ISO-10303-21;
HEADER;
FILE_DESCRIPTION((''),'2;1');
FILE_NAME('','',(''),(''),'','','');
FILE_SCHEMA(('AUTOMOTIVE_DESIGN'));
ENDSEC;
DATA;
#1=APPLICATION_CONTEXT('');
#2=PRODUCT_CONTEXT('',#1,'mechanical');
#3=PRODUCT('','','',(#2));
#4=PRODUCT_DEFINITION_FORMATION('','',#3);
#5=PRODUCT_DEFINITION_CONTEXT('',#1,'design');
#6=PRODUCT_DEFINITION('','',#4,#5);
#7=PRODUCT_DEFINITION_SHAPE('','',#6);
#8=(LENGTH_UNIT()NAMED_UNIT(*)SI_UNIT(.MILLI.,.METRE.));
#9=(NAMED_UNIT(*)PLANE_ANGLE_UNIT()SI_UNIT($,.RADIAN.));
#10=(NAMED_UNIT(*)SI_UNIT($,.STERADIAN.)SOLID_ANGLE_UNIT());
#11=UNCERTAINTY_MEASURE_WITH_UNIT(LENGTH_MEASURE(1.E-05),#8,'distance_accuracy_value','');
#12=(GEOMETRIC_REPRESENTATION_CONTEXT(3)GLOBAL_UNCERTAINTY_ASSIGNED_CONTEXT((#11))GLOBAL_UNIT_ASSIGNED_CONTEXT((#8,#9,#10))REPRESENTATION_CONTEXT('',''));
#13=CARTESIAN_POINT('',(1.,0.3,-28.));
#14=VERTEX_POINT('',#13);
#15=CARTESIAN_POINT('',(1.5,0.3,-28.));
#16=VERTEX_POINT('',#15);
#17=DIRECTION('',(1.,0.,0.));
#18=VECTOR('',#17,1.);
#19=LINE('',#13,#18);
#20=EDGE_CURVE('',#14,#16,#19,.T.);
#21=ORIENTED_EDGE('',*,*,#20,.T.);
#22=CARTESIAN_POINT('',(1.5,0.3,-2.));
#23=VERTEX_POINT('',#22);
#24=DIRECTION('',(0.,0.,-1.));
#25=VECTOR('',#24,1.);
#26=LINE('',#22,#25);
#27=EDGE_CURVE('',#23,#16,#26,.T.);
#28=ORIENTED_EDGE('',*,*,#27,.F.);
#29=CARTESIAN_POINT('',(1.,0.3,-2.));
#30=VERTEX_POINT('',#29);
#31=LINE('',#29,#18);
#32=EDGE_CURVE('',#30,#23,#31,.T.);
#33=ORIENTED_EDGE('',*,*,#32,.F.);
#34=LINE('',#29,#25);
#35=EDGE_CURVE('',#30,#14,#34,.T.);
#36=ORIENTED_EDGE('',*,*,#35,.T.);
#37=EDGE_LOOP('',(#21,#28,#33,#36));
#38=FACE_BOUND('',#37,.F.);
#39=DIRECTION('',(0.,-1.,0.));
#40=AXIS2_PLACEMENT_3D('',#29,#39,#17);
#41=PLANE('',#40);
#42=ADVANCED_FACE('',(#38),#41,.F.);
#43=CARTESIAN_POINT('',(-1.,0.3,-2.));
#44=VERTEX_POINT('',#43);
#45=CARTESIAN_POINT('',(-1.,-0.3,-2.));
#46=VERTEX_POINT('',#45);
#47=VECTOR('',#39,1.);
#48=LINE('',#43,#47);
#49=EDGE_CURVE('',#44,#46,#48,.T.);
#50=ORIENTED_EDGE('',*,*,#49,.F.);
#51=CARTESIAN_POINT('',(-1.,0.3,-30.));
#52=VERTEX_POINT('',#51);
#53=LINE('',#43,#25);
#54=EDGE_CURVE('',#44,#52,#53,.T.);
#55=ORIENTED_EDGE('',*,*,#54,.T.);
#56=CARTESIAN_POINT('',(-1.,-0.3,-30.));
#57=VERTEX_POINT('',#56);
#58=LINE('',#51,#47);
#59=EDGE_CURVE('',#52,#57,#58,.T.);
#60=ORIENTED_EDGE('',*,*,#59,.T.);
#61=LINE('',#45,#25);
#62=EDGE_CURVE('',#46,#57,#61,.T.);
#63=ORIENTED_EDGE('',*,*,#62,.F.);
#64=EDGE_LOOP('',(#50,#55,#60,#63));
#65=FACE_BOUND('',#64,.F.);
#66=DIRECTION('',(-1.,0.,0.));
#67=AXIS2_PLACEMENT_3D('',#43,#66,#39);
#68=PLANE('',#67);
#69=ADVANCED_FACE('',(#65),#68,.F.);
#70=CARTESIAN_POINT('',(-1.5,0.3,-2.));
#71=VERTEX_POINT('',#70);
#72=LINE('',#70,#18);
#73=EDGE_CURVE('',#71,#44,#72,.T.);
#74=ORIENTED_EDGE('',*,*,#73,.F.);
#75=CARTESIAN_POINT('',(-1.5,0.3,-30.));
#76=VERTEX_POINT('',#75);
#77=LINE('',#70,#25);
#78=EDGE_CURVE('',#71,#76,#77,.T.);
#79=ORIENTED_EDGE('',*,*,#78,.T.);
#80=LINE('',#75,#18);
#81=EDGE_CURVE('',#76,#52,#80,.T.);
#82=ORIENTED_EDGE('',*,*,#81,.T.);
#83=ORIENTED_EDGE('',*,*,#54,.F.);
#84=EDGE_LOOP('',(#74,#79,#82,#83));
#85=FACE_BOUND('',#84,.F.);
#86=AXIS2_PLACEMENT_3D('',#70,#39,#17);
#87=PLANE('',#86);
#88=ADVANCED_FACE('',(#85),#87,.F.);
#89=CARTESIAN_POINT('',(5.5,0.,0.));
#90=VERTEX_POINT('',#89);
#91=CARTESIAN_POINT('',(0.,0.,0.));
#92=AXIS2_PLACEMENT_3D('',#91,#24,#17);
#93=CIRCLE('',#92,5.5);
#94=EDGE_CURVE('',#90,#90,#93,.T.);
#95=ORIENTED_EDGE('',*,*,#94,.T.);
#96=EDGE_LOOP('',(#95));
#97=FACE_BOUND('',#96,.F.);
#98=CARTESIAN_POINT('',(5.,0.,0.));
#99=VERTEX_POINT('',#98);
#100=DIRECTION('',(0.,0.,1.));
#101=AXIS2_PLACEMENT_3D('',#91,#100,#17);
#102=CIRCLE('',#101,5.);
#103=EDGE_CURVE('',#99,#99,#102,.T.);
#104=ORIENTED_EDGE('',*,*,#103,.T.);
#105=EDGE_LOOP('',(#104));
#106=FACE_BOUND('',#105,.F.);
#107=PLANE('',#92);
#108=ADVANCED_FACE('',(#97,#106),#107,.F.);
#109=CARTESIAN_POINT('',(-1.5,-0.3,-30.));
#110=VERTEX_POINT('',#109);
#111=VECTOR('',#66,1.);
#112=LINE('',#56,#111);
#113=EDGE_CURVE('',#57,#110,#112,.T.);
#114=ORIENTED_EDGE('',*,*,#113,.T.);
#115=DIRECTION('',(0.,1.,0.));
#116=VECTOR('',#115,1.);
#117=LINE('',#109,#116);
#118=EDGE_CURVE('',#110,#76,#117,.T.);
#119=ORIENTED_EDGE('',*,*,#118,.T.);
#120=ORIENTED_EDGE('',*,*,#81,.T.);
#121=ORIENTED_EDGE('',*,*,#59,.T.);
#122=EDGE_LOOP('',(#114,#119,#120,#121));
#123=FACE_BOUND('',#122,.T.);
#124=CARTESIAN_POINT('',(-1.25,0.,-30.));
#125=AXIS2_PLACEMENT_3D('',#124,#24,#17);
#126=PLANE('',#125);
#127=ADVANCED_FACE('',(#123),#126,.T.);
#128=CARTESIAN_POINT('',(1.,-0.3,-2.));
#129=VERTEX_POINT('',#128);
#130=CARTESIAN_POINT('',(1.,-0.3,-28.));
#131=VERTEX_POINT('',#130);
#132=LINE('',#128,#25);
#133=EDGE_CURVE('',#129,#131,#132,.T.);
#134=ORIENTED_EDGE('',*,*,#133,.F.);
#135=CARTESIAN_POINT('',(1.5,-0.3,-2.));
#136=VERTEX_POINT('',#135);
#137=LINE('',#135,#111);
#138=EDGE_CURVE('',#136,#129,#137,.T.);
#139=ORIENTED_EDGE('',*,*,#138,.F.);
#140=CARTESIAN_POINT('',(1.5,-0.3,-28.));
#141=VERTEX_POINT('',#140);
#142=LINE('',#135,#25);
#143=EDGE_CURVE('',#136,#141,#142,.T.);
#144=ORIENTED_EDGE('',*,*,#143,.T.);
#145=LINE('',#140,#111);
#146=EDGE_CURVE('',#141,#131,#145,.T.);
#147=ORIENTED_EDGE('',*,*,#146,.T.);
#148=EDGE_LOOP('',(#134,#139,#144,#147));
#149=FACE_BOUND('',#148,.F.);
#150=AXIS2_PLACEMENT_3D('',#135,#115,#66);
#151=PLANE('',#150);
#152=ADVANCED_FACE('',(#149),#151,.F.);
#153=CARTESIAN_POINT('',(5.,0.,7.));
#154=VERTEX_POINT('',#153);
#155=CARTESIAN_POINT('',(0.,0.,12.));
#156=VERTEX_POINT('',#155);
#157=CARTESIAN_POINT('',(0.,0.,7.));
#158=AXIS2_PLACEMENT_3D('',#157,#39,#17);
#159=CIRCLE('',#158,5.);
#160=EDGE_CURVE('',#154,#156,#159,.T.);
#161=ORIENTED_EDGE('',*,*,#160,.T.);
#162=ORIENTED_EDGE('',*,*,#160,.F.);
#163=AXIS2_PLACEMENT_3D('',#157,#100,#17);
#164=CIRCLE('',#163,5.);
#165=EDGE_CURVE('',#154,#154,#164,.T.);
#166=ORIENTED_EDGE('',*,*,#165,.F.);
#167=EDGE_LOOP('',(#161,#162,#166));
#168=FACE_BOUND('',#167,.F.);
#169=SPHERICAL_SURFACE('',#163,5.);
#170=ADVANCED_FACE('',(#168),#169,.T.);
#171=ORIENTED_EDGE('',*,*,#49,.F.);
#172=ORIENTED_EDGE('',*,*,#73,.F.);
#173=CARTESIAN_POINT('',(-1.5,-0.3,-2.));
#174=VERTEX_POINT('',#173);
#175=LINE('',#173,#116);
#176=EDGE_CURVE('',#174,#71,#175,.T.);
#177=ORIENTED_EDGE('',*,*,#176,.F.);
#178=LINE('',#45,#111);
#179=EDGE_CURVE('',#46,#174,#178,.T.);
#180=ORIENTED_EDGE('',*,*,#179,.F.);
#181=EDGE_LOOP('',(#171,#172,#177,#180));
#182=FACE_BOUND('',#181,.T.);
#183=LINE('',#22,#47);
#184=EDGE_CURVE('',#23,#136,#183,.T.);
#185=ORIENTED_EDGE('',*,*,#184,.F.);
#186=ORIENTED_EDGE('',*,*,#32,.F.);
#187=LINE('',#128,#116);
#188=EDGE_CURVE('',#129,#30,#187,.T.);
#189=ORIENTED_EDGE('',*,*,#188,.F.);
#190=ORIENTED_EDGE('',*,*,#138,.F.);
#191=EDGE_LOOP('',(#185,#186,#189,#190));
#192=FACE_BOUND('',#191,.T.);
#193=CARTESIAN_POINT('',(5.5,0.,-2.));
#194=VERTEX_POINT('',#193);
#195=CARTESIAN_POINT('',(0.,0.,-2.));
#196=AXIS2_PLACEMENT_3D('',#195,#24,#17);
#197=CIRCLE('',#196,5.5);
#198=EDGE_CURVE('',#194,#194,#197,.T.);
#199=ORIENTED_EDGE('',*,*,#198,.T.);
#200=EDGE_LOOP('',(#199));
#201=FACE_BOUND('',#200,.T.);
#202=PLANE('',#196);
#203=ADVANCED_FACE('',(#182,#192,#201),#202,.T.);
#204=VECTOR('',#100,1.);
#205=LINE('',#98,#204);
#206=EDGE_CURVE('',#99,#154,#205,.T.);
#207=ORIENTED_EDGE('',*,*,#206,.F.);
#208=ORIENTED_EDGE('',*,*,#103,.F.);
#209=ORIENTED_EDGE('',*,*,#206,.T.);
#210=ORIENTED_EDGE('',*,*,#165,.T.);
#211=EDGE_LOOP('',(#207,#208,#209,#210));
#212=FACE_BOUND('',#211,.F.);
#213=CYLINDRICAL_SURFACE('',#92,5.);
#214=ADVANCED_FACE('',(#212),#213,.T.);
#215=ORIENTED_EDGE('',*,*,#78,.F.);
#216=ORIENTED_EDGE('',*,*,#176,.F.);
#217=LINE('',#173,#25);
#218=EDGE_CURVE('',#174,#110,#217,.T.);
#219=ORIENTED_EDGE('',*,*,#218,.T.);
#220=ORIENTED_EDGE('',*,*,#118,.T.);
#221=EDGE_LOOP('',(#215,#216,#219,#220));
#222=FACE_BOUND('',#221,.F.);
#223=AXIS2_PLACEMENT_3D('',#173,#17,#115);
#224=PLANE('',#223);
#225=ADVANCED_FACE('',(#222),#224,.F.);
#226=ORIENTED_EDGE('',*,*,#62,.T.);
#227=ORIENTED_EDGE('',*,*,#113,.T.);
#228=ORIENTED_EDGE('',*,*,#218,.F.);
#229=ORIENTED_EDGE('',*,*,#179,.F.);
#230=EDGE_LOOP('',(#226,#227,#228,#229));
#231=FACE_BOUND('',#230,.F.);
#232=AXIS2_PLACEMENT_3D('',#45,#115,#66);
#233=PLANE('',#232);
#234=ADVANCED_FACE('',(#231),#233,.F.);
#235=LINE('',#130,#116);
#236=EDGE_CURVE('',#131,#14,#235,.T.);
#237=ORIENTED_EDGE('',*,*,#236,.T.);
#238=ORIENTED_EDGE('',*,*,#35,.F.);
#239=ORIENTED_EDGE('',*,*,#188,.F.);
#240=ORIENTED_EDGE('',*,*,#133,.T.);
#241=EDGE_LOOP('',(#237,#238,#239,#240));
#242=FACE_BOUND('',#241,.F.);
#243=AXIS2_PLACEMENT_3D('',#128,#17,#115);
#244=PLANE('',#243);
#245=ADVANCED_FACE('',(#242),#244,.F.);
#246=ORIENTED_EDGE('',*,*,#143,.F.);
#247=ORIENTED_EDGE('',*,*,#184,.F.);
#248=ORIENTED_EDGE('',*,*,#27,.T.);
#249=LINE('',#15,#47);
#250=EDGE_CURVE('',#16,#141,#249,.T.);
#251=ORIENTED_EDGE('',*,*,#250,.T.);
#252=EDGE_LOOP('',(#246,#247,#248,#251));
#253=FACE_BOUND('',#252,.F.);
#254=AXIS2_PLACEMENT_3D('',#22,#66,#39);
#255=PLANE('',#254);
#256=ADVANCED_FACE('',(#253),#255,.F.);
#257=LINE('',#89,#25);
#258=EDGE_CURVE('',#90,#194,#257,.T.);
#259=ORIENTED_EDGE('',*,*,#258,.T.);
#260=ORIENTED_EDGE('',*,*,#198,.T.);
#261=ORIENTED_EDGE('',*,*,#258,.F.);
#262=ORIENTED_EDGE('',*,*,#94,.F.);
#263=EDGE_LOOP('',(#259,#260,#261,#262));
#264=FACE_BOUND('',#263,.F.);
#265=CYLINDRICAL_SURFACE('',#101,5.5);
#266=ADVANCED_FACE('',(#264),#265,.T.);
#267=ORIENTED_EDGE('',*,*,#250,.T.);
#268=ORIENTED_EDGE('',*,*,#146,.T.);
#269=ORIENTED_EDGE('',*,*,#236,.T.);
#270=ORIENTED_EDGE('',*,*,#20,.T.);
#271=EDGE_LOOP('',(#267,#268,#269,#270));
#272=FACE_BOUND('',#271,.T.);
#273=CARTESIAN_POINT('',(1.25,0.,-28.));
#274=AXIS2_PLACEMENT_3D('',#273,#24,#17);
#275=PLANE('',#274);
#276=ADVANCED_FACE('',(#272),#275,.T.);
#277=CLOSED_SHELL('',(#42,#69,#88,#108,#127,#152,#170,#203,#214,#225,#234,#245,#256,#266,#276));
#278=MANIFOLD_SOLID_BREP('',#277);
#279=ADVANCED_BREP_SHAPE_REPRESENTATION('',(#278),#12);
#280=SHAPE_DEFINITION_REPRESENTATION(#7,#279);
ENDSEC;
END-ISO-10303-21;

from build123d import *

# Parameters (mm, degrees)
F0_R     = 5
F1_DEPTH = 7
F4_R     = 5.5
F4_R_2   = 5
F5_DEPTH = 2
F7_DEPTH = 28
F8_DEPTH = 26


with BuildPart() as f1:
    # F0 (on Top) → F1 (new body)
    with BuildSketch(Plane.XY):
        Circle(F0_R)
    extrude(amount=F1_DEPTH)

    # F2 (on Front) → F3 (revolve)
    with BuildSketch(Plane.XZ):
        with BuildLine():
            Line((0, 12), (0, 7))
            Line((0, 7), (5, 7))
            ThreePointArc((5, 7), (3.5355339059, 10.5355339059), (0, 12))
        make_face()
    revolve(axis=Axis((0, 0, 10.5024230517), (0, 0, -1)))

    # F4 (on face) → F5 (join)
    with BuildSketch(Plane(origin=(0, 0, 0), x_dir=(1, 0, 0), z_dir=(0, 0, -1))):
        Circle(F4_R)
        Circle(F4_R_2, mode=Mode.SUBTRACT)
        Circle(F4_R_2)
    extrude(amount=F5_DEPTH)

    # F6 (on face) → F7 (join)
    with BuildSketch(Plane(origin=(0, 0, -2), x_dir=(1, 0, 0), z_dir=(0, 0, -1))):
        Polygon((-1, -0.3), (-1, 0), (-1, 0.3), (-1.5, 0.3), (-1.5, -0.3), align=None)
    extrude(amount=F7_DEPTH)

    # F6 (on face) → F8 (join)
    with BuildSketch(Plane(origin=(0, 0, -2), x_dir=(1, 0, 0), z_dir=(0, 0, -1))):
        Polygon((1, 0.3), (1, 0), (1, -0.3), (1.5, -0.3), (1.5, 0.3), align=None)
    extrude(amount=F8_DEPTH)


solid = f1.part
